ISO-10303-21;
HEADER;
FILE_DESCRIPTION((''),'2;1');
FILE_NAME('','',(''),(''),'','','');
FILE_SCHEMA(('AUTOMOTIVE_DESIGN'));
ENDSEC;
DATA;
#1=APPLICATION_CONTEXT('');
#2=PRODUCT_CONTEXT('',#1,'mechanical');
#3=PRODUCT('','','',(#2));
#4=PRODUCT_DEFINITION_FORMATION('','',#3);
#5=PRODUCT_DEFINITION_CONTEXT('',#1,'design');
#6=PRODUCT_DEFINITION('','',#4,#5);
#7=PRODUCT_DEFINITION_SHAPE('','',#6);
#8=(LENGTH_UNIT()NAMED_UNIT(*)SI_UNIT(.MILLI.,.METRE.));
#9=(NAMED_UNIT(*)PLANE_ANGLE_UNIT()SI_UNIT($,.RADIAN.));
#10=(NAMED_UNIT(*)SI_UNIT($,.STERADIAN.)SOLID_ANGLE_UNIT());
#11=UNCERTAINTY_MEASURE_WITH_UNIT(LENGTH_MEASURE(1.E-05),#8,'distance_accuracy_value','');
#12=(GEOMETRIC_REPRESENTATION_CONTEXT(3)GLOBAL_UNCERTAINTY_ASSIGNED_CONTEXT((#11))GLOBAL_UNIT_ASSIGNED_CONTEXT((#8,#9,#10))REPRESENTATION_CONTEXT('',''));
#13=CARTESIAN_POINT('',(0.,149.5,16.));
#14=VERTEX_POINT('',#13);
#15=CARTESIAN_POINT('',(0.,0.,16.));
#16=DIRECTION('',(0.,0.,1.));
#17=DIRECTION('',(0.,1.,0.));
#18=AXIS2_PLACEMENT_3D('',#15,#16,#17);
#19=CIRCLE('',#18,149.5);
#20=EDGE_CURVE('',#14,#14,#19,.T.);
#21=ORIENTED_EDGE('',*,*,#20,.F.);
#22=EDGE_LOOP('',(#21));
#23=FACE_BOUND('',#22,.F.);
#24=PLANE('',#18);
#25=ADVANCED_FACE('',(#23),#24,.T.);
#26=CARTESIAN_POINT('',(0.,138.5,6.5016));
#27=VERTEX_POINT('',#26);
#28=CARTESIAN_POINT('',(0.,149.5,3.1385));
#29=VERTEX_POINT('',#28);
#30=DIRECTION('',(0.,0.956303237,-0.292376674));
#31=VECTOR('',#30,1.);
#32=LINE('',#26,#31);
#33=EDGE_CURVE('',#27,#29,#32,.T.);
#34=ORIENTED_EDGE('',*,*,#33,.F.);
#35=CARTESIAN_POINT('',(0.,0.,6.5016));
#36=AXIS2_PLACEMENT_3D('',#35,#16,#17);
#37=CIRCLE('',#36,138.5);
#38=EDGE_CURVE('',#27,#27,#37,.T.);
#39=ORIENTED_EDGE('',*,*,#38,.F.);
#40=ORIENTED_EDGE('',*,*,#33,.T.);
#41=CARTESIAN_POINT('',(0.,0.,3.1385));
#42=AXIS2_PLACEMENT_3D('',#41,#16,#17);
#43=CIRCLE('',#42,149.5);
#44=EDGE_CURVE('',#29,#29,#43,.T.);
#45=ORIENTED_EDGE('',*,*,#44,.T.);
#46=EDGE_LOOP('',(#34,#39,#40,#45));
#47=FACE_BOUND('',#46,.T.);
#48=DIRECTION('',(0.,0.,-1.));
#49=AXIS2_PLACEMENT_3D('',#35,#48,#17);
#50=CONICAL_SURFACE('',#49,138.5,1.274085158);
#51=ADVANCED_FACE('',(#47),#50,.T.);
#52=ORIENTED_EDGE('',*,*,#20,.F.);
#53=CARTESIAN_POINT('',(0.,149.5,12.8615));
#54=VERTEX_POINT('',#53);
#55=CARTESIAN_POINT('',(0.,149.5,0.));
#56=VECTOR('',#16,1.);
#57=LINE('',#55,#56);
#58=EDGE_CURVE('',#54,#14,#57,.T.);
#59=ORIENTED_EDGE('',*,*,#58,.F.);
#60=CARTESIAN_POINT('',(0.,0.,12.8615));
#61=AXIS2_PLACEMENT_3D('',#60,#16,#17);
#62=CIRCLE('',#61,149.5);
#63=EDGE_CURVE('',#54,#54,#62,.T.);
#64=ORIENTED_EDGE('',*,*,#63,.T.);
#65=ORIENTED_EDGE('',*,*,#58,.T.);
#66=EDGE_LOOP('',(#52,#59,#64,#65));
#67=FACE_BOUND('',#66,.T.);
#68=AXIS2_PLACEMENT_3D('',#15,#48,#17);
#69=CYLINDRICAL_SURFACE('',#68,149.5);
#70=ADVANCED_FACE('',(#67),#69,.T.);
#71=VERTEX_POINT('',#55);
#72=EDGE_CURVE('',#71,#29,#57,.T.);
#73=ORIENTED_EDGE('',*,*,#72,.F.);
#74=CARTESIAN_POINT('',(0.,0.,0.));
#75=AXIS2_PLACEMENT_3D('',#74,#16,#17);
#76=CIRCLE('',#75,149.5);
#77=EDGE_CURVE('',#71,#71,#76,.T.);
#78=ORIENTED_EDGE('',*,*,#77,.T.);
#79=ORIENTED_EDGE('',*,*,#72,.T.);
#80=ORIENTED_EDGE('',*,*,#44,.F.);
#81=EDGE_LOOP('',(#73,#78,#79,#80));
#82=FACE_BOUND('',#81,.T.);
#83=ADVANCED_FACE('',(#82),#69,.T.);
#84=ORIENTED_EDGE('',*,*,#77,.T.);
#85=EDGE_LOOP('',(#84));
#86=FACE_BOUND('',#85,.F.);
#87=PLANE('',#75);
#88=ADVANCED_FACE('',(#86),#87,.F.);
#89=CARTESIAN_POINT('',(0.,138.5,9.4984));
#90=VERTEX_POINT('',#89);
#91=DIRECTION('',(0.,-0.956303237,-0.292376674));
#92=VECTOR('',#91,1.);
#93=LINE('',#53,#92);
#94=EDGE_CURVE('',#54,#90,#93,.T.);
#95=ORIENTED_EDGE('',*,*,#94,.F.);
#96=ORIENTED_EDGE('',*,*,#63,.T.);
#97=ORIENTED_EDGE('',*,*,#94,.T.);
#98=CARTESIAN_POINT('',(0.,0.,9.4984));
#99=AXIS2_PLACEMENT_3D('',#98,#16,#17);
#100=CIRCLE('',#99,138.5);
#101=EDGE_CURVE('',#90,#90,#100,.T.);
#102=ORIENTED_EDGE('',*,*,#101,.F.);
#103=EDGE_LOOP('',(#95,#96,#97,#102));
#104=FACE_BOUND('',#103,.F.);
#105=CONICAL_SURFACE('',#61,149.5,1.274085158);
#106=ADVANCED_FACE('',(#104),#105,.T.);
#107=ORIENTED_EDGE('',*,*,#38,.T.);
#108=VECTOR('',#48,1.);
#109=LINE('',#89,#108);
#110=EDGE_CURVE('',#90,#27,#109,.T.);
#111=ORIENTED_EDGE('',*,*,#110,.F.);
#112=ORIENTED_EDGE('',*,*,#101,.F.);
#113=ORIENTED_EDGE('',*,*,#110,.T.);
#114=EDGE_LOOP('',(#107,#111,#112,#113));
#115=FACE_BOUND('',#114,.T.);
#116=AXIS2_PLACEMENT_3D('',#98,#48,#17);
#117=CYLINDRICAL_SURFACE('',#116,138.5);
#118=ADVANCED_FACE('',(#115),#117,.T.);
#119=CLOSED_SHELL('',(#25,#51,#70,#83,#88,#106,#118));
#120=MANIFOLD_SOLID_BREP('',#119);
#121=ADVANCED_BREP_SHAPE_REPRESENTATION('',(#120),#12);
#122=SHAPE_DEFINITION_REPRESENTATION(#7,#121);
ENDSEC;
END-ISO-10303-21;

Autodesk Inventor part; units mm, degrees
ref_plane "YZ Plane" through (0, 0, 0) normal (1, 0, 0) x (0, 1, 0)
ref_plane "XZ Plane" through (0, 0, 0) normal (0, 1, 0) x (-1, 0, 0)
sketch "Boceto principal" plane through (0, 0, 0) normal (1, 0, 0) x (0, 1, 0)
  line L0 (0, 16) -> (149.5, 16)
  line L1 (149.5, 16) -> (149.5, 12.8615)
  line L2 (149.5, 12.8615) -> (138.5, 9.4984)
  line L3 (138.5, 9.4984) -> (138.5, 6.5016)
  line L4 (138.5, 6.5016) -> (149.5, 3.1385)
  line L5 (149.5, 3.1385) -> (149.5, 0)
  line L6 (149.5, 0) -> (0, 0)
  line L7 (147.5, 12.25) -> (147.5, 3.75) construction
  line L8 (138.5, 8) -> (147.5, 8) construction
  line L9 (149.5, 12.8615) -> (149.5, 3.1385)
  line L10 (0, -10.6704) -> (0, 48.4451) projected
  line L11 (0, 0) -> (0, 16)
  dimension "d0" = 8.5
  dimension "d1" = 34
  dimension "d2" = 2
  dimension "d6" = 16
  dimension "d21" = 295
  dimension "d25" = 11
  dimension "d27" = 8
ref_plane "Plano de correa" through (0, 138.5, 8) normal (0, 0, 1) x (1, 0, 0)
revolve "Cuerpo" add sketch "Boceto principal" angle 360 about axis through (0, 0, -10) along (0, 0, 1)
revolve "Para ranuras" cut sketch "Boceto principal" angle 360 about axis through (0, 0, -10) along (0, 0, 1) contours L9 L4 L3 L2
fillet "Empalme externo" [suppressed]
fillet "Empalme interno" [suppressed]
pattern_of_one "Patrón para ranuras"
equation "\"d0\" = da_Bw"
equation "\"d1\" = da_Alfa"
equation "\"d2\" = da_c"
equation "\"d21\" = da_Dw"
equation "\"d25\" = da_Hd"
equation "\"d27\" = da_Se"
equation "\"da_r1\" = 0"
equation "\"da_r2\" = 0"
equation "\"d18\" = da_Sg"
equation "\"d5\" = da_Se"
equation "\"da_Bw\" = 8.5"
equation "\"da_Alfa\" = 34deg"
equation "\"da_c\" = 2"
equation "\"da_Dw\" = 295"
equation "\"da_Hd\" = 11"
equation "\"da_Se\" = 8"
equation "\"da_Sg\" = 12"
properties part number "Polea ranurada2" material "Steel"
